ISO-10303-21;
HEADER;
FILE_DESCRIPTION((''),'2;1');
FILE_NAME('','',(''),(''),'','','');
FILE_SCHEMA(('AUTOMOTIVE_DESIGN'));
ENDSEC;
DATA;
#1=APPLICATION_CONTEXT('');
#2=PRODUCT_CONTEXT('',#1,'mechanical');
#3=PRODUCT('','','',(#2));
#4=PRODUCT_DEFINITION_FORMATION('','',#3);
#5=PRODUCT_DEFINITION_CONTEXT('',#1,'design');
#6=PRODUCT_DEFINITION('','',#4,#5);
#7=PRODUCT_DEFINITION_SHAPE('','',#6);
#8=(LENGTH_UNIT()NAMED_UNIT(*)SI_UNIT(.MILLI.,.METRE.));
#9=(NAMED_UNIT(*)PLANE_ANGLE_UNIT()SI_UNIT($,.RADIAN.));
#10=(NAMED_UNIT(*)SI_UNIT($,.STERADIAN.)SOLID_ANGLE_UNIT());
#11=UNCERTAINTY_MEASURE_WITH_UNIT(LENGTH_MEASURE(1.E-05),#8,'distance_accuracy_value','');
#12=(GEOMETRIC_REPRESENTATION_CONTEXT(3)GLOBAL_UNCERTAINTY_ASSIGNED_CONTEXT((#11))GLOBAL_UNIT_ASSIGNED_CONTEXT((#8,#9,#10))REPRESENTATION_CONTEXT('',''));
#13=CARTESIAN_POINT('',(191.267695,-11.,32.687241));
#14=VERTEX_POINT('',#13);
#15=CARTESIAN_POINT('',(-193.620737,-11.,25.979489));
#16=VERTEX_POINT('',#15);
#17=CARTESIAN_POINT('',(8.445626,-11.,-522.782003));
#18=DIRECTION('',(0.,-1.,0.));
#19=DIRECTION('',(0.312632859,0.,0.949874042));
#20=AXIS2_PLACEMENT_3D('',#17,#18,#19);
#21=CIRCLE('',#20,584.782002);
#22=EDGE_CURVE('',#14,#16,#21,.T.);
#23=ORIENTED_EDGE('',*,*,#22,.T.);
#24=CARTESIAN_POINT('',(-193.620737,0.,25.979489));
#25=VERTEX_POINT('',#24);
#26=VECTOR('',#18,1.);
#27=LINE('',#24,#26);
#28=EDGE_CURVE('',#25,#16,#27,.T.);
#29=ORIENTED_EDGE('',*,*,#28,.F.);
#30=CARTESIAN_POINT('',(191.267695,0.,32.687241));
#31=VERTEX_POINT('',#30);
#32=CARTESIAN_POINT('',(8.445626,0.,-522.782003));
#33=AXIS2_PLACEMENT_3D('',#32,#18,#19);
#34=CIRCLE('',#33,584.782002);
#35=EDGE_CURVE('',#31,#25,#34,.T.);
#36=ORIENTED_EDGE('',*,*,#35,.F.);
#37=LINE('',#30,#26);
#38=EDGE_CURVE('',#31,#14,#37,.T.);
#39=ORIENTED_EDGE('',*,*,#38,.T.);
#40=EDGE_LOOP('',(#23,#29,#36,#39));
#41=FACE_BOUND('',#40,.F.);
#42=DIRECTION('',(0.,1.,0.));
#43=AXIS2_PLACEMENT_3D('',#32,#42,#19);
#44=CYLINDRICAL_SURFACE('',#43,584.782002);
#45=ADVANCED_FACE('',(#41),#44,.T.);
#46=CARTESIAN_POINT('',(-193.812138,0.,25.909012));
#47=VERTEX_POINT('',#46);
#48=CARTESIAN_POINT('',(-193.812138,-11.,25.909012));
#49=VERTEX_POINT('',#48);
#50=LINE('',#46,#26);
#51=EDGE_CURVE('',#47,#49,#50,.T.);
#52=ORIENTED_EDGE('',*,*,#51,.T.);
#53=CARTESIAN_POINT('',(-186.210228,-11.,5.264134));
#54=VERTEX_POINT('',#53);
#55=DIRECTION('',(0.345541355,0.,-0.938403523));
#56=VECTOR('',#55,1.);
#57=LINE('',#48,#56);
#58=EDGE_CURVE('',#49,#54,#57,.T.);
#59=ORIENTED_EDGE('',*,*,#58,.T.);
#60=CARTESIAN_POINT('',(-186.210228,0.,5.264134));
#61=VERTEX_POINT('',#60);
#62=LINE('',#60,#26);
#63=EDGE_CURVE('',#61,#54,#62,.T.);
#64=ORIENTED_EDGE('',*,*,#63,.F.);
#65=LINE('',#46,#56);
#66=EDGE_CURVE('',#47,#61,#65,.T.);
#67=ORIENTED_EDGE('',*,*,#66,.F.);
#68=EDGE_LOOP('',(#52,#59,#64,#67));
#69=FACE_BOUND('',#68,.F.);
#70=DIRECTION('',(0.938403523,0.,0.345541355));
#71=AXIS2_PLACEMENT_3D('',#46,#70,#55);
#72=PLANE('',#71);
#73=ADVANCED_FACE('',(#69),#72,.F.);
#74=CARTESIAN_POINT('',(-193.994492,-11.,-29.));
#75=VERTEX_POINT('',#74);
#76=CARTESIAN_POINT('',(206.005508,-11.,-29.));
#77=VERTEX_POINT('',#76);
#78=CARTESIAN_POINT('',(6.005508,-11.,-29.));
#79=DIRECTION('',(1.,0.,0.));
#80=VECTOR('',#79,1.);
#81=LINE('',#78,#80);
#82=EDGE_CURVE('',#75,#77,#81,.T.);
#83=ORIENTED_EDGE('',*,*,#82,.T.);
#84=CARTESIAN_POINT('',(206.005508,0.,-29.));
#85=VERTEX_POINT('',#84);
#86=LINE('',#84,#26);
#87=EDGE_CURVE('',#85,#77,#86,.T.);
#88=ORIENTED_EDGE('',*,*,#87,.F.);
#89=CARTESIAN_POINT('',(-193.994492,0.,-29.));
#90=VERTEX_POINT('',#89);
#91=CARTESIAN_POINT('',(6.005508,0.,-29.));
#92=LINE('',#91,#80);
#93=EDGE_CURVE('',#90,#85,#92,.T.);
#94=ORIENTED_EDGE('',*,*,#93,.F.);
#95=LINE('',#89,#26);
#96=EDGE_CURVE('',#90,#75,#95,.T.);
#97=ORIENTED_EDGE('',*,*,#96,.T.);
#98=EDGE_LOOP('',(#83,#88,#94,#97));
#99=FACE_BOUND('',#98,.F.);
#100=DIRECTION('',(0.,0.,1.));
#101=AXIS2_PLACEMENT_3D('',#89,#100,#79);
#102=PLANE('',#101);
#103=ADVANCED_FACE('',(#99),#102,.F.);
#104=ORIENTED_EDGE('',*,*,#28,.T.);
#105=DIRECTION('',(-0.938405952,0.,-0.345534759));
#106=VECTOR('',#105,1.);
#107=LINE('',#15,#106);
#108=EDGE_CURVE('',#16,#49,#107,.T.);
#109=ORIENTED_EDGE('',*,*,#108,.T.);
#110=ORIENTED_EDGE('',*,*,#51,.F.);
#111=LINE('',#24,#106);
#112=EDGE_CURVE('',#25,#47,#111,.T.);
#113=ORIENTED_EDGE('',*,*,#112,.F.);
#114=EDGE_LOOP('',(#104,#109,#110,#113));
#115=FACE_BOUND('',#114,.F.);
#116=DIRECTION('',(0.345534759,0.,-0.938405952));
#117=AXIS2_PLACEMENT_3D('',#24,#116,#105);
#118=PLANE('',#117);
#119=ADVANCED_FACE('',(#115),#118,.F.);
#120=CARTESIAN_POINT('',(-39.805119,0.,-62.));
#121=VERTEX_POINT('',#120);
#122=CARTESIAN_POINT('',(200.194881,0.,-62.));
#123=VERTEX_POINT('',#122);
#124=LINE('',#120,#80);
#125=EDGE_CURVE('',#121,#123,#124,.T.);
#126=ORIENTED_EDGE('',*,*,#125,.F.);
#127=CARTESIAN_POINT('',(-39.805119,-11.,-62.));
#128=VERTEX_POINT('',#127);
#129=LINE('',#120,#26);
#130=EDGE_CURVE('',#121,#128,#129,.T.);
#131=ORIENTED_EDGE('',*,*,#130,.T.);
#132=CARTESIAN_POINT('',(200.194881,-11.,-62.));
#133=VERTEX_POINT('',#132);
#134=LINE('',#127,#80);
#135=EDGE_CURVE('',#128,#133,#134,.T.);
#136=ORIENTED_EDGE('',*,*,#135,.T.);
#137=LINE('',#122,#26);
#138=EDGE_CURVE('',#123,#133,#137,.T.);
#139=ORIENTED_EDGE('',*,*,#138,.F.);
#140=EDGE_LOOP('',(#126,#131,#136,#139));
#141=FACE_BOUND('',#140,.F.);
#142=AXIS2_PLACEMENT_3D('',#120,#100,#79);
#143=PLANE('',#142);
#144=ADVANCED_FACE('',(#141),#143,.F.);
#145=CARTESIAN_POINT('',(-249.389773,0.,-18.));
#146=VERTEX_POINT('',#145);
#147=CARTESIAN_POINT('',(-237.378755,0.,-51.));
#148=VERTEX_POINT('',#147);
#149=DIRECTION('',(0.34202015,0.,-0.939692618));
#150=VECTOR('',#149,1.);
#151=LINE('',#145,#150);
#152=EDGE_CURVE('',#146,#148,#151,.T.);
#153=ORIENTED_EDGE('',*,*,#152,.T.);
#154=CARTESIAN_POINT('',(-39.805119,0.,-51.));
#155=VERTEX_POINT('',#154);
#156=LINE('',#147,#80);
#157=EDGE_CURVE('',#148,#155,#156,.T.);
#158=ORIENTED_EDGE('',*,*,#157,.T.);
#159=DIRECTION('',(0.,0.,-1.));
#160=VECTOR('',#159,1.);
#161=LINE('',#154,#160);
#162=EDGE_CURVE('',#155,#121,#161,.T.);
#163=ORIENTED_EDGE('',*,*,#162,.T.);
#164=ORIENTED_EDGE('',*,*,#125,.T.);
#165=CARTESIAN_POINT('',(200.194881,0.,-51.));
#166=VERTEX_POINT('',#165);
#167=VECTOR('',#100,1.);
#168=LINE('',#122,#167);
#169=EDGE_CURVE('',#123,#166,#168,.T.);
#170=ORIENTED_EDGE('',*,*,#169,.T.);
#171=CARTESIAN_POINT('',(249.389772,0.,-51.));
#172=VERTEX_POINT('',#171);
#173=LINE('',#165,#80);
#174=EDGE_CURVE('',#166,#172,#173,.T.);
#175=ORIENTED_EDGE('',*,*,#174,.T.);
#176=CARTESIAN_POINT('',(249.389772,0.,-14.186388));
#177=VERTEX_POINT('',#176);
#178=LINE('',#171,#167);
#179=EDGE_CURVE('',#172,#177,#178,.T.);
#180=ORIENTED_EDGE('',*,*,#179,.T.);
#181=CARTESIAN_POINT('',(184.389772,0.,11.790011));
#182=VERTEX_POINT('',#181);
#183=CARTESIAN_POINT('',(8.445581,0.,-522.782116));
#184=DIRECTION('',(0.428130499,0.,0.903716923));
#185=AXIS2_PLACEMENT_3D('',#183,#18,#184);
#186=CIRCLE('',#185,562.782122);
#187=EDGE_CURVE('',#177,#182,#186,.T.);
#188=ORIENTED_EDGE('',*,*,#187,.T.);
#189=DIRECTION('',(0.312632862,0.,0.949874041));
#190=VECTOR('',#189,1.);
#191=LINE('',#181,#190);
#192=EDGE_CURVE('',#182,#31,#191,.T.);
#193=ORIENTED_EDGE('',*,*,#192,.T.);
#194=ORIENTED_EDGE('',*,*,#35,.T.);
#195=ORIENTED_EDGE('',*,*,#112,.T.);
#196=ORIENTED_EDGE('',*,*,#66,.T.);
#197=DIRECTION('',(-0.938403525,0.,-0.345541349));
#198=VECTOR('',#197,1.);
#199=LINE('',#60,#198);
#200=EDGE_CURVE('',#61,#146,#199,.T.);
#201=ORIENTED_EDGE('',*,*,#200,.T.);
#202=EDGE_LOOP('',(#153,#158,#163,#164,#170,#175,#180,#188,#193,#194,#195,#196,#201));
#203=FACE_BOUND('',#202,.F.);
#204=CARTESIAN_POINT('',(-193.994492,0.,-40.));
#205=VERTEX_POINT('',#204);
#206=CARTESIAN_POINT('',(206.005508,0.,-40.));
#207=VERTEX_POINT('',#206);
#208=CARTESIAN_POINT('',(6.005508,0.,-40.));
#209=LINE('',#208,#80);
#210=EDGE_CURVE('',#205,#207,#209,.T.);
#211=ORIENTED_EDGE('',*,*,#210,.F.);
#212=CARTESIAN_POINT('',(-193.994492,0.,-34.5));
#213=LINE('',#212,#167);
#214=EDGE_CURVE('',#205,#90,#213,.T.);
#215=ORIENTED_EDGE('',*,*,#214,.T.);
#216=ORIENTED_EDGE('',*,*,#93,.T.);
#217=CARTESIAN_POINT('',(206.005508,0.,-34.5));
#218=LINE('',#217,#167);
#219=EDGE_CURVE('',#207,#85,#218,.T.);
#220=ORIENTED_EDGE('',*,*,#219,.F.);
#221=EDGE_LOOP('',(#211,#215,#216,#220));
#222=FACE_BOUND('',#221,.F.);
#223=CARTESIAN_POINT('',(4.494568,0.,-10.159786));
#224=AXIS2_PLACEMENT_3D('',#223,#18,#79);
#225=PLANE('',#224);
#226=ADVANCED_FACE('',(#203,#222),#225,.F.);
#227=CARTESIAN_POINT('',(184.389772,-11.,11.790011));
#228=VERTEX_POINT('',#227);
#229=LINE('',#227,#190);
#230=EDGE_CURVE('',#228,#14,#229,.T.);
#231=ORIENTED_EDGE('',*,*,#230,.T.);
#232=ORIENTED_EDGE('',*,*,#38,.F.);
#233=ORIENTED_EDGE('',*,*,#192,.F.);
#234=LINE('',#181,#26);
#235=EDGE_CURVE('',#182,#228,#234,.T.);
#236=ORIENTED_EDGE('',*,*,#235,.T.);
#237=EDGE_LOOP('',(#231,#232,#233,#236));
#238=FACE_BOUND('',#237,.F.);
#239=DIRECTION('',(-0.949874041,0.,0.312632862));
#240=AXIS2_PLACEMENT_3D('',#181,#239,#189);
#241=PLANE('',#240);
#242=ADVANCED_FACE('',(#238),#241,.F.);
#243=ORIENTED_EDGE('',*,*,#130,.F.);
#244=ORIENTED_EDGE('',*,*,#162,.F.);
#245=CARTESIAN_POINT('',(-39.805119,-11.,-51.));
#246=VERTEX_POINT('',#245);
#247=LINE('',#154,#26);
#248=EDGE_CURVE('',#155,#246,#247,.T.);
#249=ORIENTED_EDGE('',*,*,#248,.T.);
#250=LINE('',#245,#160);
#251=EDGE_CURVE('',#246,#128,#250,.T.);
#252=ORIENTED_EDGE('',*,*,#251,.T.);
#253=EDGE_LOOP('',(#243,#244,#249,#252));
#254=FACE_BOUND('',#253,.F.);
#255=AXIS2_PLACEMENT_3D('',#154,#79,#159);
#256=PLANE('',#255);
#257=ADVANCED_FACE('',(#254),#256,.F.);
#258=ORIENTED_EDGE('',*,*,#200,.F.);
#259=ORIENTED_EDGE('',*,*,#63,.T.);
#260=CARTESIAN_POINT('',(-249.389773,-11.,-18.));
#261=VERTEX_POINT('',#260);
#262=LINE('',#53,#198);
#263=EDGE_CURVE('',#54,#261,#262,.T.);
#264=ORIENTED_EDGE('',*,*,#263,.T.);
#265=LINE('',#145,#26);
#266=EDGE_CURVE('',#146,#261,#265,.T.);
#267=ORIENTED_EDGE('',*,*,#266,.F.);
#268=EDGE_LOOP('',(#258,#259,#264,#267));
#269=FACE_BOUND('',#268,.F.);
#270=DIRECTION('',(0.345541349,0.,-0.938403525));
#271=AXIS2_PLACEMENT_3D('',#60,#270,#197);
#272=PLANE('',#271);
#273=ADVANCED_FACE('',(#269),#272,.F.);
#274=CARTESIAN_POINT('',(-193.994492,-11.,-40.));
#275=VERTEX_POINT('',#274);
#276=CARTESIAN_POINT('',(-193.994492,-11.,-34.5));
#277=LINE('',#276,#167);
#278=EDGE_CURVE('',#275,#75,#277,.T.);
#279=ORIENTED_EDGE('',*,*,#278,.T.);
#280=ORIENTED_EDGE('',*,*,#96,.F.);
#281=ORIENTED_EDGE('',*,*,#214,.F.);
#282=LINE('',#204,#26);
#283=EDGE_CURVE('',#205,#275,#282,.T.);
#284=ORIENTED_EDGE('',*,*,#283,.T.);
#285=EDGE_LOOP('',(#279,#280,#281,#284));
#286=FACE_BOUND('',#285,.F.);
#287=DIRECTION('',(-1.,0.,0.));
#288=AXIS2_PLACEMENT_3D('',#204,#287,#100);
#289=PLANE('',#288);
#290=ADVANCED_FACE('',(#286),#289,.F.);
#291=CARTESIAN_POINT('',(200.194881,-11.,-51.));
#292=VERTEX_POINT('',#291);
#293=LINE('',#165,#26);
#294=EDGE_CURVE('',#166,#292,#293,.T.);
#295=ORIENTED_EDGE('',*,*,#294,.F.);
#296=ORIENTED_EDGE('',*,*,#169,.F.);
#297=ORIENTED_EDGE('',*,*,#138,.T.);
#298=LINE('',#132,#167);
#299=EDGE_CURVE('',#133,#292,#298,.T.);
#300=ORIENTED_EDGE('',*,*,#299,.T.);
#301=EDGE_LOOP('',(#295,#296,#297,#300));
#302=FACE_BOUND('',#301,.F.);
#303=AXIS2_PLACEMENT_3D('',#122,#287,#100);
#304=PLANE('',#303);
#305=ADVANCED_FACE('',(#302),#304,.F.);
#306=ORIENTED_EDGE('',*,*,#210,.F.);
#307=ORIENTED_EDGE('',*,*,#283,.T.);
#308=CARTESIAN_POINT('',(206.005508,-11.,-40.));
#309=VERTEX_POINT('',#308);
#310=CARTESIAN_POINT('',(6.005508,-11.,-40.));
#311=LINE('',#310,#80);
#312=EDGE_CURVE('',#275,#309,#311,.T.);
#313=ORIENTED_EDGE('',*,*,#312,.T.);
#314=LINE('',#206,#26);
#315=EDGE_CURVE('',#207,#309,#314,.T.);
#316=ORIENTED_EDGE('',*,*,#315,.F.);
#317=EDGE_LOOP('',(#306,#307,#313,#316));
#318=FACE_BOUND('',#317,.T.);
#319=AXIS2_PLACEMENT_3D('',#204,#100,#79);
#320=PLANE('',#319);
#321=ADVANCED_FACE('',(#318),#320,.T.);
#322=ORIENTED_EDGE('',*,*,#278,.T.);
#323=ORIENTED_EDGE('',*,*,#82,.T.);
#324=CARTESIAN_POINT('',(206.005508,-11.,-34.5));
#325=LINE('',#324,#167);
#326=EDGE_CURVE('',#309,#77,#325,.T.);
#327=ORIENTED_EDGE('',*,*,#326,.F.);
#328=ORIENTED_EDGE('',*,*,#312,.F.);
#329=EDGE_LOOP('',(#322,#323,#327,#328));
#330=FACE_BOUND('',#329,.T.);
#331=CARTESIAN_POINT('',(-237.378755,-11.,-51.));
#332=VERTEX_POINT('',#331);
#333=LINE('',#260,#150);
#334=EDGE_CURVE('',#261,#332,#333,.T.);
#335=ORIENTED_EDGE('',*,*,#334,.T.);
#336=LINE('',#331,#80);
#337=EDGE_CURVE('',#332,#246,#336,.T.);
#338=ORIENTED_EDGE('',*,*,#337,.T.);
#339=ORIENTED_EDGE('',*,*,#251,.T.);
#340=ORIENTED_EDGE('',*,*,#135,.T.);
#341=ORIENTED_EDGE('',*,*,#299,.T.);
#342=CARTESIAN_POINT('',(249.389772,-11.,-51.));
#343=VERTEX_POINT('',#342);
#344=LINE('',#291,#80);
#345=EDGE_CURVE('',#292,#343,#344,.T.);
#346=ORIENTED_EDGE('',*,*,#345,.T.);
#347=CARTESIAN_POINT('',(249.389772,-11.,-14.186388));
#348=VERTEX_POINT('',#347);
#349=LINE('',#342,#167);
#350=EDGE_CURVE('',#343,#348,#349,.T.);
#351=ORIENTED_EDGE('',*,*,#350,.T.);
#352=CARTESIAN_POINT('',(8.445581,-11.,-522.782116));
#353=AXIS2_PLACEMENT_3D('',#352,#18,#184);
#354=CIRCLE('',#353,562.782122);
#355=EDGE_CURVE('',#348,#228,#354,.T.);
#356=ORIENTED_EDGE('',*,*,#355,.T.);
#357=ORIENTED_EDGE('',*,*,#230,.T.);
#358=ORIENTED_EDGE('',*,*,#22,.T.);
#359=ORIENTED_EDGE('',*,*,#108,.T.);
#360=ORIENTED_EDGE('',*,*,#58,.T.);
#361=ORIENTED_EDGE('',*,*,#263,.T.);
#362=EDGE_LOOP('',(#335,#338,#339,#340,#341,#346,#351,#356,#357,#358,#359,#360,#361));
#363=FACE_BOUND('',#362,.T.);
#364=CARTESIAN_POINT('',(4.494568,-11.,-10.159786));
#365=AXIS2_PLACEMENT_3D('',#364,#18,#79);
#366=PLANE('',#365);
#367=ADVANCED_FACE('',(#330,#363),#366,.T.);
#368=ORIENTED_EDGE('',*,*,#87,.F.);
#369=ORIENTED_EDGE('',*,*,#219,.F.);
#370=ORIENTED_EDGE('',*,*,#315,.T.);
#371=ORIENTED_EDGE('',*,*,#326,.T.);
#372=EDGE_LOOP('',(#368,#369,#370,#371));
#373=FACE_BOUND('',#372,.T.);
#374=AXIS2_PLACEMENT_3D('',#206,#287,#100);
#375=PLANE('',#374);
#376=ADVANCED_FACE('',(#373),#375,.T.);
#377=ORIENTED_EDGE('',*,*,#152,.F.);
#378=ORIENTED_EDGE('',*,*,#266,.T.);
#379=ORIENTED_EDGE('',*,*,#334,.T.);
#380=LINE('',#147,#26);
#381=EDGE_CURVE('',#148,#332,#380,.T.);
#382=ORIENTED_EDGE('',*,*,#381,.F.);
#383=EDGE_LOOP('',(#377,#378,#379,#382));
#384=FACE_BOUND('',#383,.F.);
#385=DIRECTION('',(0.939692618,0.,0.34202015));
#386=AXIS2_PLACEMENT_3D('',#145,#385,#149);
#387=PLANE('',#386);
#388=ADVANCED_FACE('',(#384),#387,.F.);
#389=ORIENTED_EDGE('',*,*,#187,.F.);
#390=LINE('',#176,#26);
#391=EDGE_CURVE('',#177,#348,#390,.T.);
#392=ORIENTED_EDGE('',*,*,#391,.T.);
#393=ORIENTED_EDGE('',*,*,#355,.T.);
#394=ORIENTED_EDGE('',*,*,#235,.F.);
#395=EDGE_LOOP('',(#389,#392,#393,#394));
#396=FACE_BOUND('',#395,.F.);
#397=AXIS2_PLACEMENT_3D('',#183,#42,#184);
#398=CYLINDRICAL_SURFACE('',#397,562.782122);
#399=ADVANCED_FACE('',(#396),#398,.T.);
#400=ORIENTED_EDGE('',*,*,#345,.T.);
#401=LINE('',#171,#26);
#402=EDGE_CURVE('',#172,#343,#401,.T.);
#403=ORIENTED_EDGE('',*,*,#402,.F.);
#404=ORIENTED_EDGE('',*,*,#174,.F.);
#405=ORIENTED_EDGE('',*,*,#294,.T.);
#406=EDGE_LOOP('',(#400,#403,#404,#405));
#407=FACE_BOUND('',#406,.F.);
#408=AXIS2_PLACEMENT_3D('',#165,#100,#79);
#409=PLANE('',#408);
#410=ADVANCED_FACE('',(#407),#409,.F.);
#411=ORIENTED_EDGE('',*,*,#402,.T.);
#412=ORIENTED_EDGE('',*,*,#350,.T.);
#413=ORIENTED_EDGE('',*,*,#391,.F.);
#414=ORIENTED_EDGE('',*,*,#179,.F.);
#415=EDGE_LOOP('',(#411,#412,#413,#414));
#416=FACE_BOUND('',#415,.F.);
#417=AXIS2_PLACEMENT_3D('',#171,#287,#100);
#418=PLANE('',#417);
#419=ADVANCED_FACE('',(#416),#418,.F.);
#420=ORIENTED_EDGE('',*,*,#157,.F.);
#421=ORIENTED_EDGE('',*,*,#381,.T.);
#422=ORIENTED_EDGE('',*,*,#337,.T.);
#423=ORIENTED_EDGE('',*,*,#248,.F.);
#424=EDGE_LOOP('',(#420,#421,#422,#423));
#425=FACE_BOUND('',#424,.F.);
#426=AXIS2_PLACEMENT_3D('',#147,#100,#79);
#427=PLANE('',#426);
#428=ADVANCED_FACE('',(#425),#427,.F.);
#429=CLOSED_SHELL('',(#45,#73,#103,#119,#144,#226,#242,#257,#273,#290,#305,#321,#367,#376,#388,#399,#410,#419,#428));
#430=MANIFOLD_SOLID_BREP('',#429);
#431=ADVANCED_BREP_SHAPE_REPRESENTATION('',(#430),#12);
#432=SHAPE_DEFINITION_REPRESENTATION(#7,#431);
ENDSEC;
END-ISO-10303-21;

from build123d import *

# Parameters (mm, degrees)
F0_W     = 400
F0_H     = 11
F1_DEPTH = 11


# Not quite as in the source:
# - ends of sketch curves that miss each other by under 0.0002 mm in the source are joined


with BuildPart() as f1:
    # F0 (on Front) → F1 (new body)
    with BuildSketch(Plane.XZ):
        with BuildLine():
            Line((-186.2102279461, 5.2641338535), (-249.389773, -18))
            Line((-249.389773, -18), (-237.378755, -51))
            Line((-237.378755, -51), (-39.805119, -51))
            Line((-39.805119, -51), (-39.805119, -62))
            Line((-39.805119, -62), (200.194881, -62))
            Line((200.194881, -62), (200.194881, -51))
            Line((200.194881, -51), (249.389772, -51))
            Line((249.389772, -51), (249.389772, -14.186388))
            ThreePointArc((249.389772, -14.186388), (217.2940285637, -0.1866284114), (184.3897718043, 11.7900114054))
            Line((184.3897718043, 11.7900114054), (191.267695, 32.687241))
            ThreePointArc((191.267695, 32.687241), (-1.7442805029, 61.9112120177), (-193.620736559, 25.9794888024))
            Line((-193.620736559, 25.9794888024), (-193.812138, 25.909012))
            Line((-193.812138, 25.909012), (-186.2102279461, 5.2641338535))
        make_face()
        with Locations((6.005508, -34.5)):
            Rectangle(F0_W, F0_H, mode=Mode.SUBTRACT)
    extrude(amount=F1_DEPTH)


solid = f1.part
